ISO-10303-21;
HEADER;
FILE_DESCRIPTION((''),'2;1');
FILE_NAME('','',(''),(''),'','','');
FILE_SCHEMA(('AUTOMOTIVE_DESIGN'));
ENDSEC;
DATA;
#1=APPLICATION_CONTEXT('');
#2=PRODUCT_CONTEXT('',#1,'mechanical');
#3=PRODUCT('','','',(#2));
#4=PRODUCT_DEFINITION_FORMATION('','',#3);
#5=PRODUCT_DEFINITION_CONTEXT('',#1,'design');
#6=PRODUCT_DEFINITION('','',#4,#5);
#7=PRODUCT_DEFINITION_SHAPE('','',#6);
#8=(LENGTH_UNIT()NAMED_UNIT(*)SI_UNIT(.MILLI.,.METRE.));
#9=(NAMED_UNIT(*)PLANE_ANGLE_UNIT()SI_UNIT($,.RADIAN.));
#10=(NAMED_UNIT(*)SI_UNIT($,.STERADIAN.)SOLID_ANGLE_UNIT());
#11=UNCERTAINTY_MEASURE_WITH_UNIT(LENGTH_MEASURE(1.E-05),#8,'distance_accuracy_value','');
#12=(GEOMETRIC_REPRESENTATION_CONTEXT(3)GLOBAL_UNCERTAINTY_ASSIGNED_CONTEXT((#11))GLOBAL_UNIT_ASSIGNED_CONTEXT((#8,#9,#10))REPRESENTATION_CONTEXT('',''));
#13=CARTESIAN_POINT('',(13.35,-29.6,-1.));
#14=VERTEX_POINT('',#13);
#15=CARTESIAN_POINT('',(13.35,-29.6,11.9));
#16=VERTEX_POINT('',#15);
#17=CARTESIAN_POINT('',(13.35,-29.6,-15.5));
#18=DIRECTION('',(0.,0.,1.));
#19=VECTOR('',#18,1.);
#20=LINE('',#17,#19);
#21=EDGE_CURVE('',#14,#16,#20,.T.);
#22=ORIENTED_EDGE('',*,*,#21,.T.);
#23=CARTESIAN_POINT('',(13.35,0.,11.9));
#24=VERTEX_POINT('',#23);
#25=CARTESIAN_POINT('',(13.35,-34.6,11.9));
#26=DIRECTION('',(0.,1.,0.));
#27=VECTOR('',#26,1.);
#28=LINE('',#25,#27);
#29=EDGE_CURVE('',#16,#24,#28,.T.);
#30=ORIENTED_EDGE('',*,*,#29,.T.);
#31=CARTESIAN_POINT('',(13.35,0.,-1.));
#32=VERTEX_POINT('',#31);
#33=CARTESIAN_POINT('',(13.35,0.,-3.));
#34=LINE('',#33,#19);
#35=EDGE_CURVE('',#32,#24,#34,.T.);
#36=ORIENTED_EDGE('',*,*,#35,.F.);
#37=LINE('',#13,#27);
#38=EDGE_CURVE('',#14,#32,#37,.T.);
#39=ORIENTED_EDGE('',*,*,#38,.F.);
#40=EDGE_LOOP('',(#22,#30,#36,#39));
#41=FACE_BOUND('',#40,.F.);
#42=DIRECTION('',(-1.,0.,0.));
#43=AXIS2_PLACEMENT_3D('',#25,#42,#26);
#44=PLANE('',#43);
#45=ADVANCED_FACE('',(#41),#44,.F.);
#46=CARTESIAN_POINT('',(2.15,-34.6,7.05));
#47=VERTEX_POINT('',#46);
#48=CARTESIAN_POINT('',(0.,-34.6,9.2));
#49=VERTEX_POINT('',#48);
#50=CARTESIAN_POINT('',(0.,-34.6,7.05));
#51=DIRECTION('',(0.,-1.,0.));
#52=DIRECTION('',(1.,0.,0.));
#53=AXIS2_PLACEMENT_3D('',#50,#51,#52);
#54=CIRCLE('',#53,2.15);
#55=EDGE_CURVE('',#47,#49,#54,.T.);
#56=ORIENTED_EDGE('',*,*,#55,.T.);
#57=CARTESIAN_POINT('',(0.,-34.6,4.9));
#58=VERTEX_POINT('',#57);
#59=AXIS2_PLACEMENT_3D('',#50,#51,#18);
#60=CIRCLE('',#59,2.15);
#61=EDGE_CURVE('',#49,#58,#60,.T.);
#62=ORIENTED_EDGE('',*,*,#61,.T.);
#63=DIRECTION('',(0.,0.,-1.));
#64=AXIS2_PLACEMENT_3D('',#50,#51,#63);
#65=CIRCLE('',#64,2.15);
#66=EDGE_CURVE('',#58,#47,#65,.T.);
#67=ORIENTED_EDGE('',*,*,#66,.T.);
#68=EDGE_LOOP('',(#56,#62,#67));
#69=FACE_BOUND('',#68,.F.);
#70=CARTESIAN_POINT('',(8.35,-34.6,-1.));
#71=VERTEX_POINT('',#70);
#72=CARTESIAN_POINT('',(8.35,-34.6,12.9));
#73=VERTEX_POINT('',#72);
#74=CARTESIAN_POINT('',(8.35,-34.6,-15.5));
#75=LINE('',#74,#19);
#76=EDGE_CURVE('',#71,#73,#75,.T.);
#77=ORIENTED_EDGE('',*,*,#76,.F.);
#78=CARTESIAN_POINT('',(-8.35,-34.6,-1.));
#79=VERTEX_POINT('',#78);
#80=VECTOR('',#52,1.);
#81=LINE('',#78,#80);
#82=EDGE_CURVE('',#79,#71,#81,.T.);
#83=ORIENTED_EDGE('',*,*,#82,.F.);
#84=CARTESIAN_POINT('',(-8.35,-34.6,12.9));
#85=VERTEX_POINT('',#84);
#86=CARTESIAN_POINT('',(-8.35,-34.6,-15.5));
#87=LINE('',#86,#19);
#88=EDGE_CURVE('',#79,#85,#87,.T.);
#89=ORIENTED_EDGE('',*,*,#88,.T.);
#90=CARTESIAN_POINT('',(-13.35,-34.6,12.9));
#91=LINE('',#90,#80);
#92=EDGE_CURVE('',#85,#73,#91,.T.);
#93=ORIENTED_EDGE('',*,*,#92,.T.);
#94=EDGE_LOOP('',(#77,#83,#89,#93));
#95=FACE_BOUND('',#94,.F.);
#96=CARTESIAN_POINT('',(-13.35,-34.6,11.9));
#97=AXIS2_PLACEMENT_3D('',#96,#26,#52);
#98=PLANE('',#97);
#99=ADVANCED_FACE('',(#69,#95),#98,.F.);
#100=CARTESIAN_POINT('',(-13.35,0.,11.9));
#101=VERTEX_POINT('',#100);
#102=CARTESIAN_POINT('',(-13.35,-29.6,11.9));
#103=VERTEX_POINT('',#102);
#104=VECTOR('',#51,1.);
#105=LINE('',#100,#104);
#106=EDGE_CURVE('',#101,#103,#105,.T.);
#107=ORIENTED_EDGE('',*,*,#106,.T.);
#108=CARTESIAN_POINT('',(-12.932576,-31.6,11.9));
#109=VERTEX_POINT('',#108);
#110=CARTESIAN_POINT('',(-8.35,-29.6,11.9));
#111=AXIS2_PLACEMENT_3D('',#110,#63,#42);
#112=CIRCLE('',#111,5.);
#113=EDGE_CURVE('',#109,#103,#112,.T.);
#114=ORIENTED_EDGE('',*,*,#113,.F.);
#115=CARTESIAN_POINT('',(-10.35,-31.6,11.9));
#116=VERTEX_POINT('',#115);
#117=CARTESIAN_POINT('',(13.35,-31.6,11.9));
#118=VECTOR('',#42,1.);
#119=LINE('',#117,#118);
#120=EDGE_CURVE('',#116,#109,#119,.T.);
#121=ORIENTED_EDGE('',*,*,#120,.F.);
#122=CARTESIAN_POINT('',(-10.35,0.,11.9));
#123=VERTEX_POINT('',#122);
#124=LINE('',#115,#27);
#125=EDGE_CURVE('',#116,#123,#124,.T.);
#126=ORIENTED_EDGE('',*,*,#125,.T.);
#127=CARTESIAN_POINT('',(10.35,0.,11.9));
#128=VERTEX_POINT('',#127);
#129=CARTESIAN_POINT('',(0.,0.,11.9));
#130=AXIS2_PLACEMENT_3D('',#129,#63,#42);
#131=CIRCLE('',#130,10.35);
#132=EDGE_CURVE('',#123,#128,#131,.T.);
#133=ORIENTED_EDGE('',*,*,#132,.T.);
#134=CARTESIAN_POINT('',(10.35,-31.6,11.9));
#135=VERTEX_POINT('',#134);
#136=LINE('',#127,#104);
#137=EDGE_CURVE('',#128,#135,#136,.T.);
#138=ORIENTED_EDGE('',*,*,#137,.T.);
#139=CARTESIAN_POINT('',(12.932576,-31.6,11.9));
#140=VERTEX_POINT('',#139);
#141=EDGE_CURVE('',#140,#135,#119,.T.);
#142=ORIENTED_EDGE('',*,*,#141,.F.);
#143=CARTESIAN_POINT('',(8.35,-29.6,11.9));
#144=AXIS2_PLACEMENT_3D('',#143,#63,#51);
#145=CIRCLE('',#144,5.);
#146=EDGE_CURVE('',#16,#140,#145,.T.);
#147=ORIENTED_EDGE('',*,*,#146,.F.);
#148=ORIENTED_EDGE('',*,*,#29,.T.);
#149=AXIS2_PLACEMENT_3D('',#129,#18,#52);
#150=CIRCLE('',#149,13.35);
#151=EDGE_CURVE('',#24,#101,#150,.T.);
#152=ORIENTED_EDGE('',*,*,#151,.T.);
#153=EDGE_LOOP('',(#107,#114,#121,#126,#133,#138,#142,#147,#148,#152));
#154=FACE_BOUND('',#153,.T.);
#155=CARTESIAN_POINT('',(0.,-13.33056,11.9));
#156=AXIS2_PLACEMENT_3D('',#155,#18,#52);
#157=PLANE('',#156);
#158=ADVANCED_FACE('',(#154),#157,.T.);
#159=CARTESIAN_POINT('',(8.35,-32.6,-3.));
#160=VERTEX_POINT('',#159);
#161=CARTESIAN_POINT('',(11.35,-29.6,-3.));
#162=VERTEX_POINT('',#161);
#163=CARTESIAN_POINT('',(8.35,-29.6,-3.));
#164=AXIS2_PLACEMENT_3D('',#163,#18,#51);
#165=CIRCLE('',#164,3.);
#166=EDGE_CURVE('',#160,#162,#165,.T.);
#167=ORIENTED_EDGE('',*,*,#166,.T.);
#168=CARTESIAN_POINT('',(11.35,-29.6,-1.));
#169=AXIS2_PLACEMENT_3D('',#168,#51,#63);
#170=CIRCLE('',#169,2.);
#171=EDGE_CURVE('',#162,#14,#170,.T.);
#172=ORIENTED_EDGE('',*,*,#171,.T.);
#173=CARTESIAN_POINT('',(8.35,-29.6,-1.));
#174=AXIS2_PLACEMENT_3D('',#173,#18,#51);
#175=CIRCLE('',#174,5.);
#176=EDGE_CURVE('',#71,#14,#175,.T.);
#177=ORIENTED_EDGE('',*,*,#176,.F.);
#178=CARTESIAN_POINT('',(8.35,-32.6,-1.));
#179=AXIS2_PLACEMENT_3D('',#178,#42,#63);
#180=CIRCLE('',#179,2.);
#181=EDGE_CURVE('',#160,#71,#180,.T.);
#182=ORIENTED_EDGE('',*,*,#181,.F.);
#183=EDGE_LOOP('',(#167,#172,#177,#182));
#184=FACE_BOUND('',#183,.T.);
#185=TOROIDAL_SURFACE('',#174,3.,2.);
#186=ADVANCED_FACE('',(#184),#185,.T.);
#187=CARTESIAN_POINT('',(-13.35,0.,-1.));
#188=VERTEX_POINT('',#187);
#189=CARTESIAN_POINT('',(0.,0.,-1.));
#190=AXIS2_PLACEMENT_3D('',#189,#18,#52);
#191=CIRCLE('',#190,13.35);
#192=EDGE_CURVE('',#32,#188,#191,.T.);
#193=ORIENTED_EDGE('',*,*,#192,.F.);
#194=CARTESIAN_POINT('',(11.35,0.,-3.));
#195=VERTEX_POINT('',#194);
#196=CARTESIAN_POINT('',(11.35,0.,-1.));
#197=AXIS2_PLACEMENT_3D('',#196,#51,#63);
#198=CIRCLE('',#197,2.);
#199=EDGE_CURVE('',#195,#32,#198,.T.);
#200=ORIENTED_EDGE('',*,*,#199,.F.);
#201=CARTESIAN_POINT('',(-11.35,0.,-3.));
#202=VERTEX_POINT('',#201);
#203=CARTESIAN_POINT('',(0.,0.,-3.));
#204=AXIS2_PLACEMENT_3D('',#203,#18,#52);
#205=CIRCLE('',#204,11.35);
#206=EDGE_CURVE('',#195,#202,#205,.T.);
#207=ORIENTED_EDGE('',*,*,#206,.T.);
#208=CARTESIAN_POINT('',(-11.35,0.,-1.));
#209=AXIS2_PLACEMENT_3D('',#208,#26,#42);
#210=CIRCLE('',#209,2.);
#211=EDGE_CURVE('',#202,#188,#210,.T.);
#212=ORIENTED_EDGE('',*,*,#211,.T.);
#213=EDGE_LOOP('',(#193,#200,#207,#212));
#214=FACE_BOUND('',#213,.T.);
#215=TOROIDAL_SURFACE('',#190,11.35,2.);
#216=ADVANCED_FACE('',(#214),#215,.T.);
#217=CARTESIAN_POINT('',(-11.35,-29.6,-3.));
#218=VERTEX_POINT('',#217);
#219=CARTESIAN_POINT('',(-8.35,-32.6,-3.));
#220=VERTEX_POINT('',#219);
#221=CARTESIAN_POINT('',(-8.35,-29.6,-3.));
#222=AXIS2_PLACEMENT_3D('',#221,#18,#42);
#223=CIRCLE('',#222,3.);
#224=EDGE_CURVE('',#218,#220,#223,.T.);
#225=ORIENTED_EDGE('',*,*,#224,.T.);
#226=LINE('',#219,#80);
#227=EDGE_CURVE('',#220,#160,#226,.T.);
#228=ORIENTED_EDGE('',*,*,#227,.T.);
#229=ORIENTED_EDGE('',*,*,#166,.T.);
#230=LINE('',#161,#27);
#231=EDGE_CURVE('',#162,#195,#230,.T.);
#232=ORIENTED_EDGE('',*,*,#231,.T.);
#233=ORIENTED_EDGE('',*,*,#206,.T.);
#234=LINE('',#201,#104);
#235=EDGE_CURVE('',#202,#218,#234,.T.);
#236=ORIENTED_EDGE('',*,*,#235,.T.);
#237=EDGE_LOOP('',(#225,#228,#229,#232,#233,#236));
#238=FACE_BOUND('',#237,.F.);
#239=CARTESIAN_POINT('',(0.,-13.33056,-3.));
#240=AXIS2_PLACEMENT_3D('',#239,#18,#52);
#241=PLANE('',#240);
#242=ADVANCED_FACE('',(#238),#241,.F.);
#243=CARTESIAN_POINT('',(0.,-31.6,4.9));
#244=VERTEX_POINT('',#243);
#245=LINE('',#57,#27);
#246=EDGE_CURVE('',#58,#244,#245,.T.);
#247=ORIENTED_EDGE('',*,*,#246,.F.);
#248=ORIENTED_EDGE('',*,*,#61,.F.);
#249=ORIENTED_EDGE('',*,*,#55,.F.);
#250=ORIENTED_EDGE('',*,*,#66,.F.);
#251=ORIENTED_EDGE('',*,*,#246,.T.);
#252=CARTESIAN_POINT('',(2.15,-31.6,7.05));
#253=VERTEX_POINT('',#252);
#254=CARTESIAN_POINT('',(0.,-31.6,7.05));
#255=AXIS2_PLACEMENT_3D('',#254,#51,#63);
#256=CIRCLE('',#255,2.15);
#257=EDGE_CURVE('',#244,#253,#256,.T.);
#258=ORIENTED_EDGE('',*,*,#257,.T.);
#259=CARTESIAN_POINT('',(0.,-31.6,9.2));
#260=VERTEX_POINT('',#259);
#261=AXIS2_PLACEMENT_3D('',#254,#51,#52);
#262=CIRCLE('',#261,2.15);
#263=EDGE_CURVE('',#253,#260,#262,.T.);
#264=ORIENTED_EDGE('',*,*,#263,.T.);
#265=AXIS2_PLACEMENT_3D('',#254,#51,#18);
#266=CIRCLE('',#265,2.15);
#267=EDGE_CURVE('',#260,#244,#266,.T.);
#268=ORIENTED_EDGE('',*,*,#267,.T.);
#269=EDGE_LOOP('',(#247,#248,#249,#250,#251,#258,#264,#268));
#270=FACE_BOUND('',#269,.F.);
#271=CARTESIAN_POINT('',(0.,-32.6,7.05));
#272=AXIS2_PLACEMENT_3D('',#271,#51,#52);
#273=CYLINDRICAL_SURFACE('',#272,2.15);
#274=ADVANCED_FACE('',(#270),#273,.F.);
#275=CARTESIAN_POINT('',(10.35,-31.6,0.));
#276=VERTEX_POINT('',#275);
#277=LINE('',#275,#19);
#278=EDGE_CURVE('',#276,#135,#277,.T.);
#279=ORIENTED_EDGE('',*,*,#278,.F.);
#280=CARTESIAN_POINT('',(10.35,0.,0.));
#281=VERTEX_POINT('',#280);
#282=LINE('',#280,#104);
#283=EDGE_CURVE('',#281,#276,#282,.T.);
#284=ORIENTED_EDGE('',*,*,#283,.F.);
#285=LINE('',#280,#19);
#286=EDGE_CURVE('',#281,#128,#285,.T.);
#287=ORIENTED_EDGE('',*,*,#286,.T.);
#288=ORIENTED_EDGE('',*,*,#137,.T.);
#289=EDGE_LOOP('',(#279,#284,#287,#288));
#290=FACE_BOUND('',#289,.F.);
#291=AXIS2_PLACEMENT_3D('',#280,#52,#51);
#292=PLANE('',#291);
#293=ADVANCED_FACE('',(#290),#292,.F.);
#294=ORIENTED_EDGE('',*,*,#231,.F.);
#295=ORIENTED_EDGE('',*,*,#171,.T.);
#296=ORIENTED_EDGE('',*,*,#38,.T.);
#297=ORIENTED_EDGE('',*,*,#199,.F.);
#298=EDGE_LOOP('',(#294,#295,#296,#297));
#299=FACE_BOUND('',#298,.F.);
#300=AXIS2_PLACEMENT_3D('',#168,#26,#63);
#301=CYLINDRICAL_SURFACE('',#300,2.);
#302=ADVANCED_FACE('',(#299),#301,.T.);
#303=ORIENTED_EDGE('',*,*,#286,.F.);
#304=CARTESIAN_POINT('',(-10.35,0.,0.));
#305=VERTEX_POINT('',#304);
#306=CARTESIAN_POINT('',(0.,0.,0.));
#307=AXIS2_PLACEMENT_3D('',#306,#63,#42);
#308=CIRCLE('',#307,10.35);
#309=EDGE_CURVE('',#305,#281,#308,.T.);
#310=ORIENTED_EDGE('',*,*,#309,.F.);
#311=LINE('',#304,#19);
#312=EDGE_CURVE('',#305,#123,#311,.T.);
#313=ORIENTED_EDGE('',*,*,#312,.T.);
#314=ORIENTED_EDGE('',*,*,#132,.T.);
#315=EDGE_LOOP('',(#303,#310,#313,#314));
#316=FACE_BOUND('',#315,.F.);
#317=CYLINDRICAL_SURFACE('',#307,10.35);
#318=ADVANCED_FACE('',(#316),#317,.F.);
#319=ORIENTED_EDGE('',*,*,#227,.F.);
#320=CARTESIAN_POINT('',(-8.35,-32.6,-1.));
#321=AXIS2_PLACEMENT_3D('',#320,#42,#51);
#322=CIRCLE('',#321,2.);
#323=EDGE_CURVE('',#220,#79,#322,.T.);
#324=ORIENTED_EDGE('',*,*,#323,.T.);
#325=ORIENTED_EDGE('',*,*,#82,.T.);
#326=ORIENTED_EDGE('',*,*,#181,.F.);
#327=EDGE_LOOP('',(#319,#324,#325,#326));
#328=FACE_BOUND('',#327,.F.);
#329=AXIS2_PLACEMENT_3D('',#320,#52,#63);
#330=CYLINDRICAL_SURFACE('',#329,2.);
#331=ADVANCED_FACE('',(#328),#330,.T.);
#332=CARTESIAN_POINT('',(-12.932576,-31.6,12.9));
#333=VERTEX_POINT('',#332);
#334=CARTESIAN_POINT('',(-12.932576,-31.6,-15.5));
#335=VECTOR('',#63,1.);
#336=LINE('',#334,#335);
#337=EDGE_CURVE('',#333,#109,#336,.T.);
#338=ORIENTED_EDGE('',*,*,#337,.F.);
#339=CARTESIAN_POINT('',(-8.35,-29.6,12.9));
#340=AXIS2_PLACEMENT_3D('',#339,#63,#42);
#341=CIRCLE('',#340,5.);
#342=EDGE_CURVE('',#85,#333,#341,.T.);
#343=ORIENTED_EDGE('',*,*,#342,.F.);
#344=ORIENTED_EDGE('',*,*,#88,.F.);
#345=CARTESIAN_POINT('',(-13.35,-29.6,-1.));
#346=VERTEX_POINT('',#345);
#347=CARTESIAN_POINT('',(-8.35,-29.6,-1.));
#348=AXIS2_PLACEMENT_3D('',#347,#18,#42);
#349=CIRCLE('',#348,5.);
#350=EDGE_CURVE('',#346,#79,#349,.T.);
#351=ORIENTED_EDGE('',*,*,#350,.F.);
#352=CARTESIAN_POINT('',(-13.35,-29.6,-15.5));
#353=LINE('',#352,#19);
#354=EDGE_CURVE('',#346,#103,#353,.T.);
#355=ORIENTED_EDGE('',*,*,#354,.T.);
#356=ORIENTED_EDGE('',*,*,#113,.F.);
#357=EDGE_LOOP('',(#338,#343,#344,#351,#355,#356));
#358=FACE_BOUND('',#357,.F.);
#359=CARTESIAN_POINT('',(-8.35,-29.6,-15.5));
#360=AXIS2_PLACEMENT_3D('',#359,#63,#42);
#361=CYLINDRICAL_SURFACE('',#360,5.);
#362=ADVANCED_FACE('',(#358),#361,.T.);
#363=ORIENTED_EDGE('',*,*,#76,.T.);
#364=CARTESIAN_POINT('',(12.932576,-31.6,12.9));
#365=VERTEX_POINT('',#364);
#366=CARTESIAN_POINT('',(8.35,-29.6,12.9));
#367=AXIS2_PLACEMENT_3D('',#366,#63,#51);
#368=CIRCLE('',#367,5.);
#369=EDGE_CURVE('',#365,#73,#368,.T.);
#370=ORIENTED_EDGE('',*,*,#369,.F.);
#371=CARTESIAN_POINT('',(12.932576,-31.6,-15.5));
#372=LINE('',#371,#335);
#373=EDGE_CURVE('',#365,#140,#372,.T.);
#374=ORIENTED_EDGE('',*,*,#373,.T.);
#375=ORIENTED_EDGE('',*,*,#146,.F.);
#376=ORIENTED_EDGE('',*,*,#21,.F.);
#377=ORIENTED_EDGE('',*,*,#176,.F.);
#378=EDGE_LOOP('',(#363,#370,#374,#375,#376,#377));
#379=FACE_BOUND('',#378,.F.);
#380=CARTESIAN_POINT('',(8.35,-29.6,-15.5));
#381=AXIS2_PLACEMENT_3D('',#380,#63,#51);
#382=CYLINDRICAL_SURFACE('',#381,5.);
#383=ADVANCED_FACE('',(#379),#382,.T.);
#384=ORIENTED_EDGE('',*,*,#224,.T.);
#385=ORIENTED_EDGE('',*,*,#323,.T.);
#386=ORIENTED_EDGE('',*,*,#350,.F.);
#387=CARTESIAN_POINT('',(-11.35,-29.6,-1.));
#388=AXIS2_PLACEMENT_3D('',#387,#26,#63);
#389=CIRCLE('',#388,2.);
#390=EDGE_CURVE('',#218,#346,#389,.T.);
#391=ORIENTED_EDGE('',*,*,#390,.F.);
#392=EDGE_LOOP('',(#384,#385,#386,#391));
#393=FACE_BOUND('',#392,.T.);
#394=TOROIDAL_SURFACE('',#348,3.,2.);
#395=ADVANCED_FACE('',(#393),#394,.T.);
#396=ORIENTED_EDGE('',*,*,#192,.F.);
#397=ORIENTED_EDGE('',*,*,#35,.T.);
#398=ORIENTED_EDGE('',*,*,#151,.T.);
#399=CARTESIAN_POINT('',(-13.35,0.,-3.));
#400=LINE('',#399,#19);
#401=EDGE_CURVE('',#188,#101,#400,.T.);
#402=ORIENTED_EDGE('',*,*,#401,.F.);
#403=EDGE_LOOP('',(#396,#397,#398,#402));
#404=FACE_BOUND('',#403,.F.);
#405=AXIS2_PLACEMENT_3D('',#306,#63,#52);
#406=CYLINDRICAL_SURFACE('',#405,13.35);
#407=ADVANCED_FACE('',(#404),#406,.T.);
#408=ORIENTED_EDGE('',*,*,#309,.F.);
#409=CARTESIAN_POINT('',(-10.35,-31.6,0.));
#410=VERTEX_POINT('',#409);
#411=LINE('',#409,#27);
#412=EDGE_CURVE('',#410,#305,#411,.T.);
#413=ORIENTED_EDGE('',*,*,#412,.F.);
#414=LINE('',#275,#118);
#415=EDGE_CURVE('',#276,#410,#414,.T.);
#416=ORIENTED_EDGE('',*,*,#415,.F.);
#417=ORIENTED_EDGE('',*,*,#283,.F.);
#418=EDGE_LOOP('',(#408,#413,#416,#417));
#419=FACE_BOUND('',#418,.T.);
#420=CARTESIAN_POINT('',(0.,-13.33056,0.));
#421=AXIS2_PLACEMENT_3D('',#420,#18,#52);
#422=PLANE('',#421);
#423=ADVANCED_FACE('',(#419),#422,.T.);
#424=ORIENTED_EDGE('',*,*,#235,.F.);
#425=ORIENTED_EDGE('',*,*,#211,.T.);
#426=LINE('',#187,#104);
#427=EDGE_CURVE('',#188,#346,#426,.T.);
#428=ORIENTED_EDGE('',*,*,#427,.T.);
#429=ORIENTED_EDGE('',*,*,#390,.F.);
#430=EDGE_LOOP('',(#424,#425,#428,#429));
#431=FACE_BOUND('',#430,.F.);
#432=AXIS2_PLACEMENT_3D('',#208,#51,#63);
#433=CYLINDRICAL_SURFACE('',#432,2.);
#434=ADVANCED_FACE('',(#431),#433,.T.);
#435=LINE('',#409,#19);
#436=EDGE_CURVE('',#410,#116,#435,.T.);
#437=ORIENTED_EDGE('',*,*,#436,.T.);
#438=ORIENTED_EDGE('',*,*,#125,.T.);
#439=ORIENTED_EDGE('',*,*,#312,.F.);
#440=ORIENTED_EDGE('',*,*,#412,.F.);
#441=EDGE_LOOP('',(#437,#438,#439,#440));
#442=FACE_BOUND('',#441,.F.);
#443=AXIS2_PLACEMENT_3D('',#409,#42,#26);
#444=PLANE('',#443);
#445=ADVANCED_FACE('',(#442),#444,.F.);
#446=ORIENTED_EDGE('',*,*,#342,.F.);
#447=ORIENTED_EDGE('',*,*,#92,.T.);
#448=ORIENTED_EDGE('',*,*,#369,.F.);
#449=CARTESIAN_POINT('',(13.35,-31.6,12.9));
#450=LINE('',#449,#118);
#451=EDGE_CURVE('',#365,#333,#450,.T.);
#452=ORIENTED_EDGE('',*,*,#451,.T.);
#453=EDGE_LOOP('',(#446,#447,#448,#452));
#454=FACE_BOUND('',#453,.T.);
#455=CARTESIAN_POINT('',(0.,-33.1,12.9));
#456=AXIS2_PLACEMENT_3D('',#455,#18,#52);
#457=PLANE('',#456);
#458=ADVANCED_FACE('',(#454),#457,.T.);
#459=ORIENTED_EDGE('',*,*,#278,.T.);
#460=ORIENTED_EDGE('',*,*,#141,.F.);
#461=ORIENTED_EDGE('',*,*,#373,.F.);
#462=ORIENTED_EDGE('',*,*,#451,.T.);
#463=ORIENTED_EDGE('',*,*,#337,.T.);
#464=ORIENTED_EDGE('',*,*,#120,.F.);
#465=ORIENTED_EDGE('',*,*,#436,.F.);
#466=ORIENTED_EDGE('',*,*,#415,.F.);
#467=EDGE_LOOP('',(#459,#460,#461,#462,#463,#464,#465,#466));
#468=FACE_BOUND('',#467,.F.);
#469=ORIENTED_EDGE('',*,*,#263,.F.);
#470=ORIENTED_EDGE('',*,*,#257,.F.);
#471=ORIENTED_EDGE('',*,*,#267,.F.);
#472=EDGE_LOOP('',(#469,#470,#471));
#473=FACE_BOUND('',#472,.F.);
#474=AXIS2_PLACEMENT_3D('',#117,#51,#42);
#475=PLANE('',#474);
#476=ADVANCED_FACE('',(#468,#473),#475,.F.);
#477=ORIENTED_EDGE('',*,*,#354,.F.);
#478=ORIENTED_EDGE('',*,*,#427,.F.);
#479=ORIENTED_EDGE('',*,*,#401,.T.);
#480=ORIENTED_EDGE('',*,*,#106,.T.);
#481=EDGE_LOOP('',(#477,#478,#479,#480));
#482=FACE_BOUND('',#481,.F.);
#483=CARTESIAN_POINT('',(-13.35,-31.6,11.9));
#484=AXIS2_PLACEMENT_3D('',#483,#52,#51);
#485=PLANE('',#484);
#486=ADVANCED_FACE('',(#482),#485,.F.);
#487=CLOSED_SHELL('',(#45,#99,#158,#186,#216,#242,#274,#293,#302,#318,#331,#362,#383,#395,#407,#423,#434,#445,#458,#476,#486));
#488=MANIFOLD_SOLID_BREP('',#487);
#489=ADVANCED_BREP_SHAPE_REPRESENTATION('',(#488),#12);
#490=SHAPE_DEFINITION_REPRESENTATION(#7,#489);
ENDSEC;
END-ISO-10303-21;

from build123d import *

# Parameters (mm, degrees)
F1_DEPTH    = 3
F2_DEPTH    = 11.9
F4_DEPTH    = 1
F6_DEPTH    = 6
F7_T1_DEPTH = 40.9
F8_R        = 2
F9_R        = 3.5272638361
F10_DEPTH   = 1
F11_DEPTH   = 25


# Not quite as in the source:
# - a fillet or chamfer that OpenCascade refuses, or shapes differently, is made with other operations: its cross-section is extruded or revolved along the edge and cut away or added


with BuildPart() as f1:
    # F0 (on Top) → F1 (new body)
    with BuildSketch(Plane.XY):
        with BuildLine():
            Line((13.35, -34.6), (13.35, 0))
            ThreePointArc((13.35, 0), (0, 13.35), (-13.35, 0))
            Line((-13.35, 0), (-13.35, -34.6))
            Line((-13.35, -34.6), (13.35, -34.6))
        make_face()
        with BuildLine():
            Line((-10.35, -31.6), (-10.35, 0))
            ThreePointArc((-10.35, 0), (0, 10.35), (10.35, 0))
            Line((10.35, 0), (10.35, -31.6))
            Line((10.35, -31.6), (-10.35, -31.6))
        make_face(mode=Mode.SUBTRACT)
        with BuildLine():
            ThreePointArc((10.35, 0), (0, 10.35), (-10.35, 0))
            Line((-10.35, 0), (-10.35, -31.6))
            Line((-10.35, -31.6), (10.35, -31.6))
            Line((10.35, -31.6), (10.35, 0))
        make_face()
    extrude(amount=-F1_DEPTH)

    # F0 (on Top) → F2 (join)
    with BuildSketch(Plane.XY):
        with BuildLine():
            Line((13.35, -34.6), (13.35, 0))
            ThreePointArc((13.35, 0), (0, 13.35), (-13.35, 0))
            Line((-13.35, 0), (-13.35, -34.6))
            Line((-13.35, -34.6), (13.35, -34.6))
        make_face()
        with BuildLine():
            Line((-10.35, -31.6), (-10.35, 0))
            ThreePointArc((-10.35, 0), (0, 10.35), (10.35, 0))
            Line((10.35, 0), (10.35, -31.6))
            Line((10.35, -31.6), (-10.35, -31.6))
        make_face(mode=Mode.SUBTRACT)
    extrude(amount=F2_DEPTH)

    # F3 (on face) → F4 (join)
    with BuildSketch(Plane.XY.offset(11.9)):
        Polygon((-13.35, -34.6), (13.35, -34.6), (13.35, -31.6), (10.35, -31.6), (-10.35, -31.6), (-13.35, -31.6), align=None)
    extrude(amount=F4_DEPTH)

    # F5 (on face) → F6 (cut)
    with BuildSketch(Plane.XZ.offset(34.6)):
        with BuildLine():
            ThreePointArc((0, 9.2), (-2.15, 7.05), (0, 4.9))
            Line((0, 4.9), (0, 9.2))
        make_face()
        with BuildLine():
            Line((0, 9.2), (0, 4.9))
            ThreePointArc((0, 4.9), (1.5202795796, 5.5297204204), (2.15, 7.05))
            ThreePointArc((2.15, 7.05), (1.5202795796, 8.5702795796), (0, 9.2))
        make_face()
    extrude(amount=-F6_DEPTH, mode=Mode.SUBTRACT)

    # F7: fillet of radius 5 on 2 edges, made by hand

    # F7_s2 → F7_t1 (cut)
    with BuildSketch(Plane.XY.offset(-15.5)):
        with BuildLine():
            ThreePointArc((-13.35, -29.6), (-11.8855339059, -33.1355339059), (-8.35, -34.6))
            Line((-8.35, -34.6), (-13.35, -34.6))
            Line((-13.35, -34.6), (-13.35, -29.6))
        make_face()
        with BuildLine():
            ThreePointArc((8.35, -34.6), (11.8855339059, -33.1355339059), (13.35, -29.6))
            Line((13.35, -29.6), (13.35, -34.6))
            Line((13.35, -34.6), (8.35, -34.6))
        make_face()
    extrude(amount=F7_T1_DEPTH, mode=Mode.SUBTRACT)

    # F8
    f8_edges = [f1.edges().sort_by_distance(p)[0] for p in [
        (13.35, -14.8, -3),
    ]]
    fillet(f8_edges, radius=F8_R)

    # F9 (on face) → F10 (join)
    with BuildSketch(Plane(origin=(0, -31.6, 0), x_dir=(-1, 0, 0), z_dir=(0, 1, 0))):
        with Locations((0, 7.05)):
            Circle(F9_R)
    extrude(amount=-F10_DEPTH)

    # F11 (cut): a face of the model
    f11_faces = [f1.faces().sort_by_distance(p)[0] for p in [
        (0, -32.6, 7.05),
    ]]
    extrude(f11_faces, amount=-F11_DEPTH, mode=Mode.SUBTRACT)


solid = f1.part
